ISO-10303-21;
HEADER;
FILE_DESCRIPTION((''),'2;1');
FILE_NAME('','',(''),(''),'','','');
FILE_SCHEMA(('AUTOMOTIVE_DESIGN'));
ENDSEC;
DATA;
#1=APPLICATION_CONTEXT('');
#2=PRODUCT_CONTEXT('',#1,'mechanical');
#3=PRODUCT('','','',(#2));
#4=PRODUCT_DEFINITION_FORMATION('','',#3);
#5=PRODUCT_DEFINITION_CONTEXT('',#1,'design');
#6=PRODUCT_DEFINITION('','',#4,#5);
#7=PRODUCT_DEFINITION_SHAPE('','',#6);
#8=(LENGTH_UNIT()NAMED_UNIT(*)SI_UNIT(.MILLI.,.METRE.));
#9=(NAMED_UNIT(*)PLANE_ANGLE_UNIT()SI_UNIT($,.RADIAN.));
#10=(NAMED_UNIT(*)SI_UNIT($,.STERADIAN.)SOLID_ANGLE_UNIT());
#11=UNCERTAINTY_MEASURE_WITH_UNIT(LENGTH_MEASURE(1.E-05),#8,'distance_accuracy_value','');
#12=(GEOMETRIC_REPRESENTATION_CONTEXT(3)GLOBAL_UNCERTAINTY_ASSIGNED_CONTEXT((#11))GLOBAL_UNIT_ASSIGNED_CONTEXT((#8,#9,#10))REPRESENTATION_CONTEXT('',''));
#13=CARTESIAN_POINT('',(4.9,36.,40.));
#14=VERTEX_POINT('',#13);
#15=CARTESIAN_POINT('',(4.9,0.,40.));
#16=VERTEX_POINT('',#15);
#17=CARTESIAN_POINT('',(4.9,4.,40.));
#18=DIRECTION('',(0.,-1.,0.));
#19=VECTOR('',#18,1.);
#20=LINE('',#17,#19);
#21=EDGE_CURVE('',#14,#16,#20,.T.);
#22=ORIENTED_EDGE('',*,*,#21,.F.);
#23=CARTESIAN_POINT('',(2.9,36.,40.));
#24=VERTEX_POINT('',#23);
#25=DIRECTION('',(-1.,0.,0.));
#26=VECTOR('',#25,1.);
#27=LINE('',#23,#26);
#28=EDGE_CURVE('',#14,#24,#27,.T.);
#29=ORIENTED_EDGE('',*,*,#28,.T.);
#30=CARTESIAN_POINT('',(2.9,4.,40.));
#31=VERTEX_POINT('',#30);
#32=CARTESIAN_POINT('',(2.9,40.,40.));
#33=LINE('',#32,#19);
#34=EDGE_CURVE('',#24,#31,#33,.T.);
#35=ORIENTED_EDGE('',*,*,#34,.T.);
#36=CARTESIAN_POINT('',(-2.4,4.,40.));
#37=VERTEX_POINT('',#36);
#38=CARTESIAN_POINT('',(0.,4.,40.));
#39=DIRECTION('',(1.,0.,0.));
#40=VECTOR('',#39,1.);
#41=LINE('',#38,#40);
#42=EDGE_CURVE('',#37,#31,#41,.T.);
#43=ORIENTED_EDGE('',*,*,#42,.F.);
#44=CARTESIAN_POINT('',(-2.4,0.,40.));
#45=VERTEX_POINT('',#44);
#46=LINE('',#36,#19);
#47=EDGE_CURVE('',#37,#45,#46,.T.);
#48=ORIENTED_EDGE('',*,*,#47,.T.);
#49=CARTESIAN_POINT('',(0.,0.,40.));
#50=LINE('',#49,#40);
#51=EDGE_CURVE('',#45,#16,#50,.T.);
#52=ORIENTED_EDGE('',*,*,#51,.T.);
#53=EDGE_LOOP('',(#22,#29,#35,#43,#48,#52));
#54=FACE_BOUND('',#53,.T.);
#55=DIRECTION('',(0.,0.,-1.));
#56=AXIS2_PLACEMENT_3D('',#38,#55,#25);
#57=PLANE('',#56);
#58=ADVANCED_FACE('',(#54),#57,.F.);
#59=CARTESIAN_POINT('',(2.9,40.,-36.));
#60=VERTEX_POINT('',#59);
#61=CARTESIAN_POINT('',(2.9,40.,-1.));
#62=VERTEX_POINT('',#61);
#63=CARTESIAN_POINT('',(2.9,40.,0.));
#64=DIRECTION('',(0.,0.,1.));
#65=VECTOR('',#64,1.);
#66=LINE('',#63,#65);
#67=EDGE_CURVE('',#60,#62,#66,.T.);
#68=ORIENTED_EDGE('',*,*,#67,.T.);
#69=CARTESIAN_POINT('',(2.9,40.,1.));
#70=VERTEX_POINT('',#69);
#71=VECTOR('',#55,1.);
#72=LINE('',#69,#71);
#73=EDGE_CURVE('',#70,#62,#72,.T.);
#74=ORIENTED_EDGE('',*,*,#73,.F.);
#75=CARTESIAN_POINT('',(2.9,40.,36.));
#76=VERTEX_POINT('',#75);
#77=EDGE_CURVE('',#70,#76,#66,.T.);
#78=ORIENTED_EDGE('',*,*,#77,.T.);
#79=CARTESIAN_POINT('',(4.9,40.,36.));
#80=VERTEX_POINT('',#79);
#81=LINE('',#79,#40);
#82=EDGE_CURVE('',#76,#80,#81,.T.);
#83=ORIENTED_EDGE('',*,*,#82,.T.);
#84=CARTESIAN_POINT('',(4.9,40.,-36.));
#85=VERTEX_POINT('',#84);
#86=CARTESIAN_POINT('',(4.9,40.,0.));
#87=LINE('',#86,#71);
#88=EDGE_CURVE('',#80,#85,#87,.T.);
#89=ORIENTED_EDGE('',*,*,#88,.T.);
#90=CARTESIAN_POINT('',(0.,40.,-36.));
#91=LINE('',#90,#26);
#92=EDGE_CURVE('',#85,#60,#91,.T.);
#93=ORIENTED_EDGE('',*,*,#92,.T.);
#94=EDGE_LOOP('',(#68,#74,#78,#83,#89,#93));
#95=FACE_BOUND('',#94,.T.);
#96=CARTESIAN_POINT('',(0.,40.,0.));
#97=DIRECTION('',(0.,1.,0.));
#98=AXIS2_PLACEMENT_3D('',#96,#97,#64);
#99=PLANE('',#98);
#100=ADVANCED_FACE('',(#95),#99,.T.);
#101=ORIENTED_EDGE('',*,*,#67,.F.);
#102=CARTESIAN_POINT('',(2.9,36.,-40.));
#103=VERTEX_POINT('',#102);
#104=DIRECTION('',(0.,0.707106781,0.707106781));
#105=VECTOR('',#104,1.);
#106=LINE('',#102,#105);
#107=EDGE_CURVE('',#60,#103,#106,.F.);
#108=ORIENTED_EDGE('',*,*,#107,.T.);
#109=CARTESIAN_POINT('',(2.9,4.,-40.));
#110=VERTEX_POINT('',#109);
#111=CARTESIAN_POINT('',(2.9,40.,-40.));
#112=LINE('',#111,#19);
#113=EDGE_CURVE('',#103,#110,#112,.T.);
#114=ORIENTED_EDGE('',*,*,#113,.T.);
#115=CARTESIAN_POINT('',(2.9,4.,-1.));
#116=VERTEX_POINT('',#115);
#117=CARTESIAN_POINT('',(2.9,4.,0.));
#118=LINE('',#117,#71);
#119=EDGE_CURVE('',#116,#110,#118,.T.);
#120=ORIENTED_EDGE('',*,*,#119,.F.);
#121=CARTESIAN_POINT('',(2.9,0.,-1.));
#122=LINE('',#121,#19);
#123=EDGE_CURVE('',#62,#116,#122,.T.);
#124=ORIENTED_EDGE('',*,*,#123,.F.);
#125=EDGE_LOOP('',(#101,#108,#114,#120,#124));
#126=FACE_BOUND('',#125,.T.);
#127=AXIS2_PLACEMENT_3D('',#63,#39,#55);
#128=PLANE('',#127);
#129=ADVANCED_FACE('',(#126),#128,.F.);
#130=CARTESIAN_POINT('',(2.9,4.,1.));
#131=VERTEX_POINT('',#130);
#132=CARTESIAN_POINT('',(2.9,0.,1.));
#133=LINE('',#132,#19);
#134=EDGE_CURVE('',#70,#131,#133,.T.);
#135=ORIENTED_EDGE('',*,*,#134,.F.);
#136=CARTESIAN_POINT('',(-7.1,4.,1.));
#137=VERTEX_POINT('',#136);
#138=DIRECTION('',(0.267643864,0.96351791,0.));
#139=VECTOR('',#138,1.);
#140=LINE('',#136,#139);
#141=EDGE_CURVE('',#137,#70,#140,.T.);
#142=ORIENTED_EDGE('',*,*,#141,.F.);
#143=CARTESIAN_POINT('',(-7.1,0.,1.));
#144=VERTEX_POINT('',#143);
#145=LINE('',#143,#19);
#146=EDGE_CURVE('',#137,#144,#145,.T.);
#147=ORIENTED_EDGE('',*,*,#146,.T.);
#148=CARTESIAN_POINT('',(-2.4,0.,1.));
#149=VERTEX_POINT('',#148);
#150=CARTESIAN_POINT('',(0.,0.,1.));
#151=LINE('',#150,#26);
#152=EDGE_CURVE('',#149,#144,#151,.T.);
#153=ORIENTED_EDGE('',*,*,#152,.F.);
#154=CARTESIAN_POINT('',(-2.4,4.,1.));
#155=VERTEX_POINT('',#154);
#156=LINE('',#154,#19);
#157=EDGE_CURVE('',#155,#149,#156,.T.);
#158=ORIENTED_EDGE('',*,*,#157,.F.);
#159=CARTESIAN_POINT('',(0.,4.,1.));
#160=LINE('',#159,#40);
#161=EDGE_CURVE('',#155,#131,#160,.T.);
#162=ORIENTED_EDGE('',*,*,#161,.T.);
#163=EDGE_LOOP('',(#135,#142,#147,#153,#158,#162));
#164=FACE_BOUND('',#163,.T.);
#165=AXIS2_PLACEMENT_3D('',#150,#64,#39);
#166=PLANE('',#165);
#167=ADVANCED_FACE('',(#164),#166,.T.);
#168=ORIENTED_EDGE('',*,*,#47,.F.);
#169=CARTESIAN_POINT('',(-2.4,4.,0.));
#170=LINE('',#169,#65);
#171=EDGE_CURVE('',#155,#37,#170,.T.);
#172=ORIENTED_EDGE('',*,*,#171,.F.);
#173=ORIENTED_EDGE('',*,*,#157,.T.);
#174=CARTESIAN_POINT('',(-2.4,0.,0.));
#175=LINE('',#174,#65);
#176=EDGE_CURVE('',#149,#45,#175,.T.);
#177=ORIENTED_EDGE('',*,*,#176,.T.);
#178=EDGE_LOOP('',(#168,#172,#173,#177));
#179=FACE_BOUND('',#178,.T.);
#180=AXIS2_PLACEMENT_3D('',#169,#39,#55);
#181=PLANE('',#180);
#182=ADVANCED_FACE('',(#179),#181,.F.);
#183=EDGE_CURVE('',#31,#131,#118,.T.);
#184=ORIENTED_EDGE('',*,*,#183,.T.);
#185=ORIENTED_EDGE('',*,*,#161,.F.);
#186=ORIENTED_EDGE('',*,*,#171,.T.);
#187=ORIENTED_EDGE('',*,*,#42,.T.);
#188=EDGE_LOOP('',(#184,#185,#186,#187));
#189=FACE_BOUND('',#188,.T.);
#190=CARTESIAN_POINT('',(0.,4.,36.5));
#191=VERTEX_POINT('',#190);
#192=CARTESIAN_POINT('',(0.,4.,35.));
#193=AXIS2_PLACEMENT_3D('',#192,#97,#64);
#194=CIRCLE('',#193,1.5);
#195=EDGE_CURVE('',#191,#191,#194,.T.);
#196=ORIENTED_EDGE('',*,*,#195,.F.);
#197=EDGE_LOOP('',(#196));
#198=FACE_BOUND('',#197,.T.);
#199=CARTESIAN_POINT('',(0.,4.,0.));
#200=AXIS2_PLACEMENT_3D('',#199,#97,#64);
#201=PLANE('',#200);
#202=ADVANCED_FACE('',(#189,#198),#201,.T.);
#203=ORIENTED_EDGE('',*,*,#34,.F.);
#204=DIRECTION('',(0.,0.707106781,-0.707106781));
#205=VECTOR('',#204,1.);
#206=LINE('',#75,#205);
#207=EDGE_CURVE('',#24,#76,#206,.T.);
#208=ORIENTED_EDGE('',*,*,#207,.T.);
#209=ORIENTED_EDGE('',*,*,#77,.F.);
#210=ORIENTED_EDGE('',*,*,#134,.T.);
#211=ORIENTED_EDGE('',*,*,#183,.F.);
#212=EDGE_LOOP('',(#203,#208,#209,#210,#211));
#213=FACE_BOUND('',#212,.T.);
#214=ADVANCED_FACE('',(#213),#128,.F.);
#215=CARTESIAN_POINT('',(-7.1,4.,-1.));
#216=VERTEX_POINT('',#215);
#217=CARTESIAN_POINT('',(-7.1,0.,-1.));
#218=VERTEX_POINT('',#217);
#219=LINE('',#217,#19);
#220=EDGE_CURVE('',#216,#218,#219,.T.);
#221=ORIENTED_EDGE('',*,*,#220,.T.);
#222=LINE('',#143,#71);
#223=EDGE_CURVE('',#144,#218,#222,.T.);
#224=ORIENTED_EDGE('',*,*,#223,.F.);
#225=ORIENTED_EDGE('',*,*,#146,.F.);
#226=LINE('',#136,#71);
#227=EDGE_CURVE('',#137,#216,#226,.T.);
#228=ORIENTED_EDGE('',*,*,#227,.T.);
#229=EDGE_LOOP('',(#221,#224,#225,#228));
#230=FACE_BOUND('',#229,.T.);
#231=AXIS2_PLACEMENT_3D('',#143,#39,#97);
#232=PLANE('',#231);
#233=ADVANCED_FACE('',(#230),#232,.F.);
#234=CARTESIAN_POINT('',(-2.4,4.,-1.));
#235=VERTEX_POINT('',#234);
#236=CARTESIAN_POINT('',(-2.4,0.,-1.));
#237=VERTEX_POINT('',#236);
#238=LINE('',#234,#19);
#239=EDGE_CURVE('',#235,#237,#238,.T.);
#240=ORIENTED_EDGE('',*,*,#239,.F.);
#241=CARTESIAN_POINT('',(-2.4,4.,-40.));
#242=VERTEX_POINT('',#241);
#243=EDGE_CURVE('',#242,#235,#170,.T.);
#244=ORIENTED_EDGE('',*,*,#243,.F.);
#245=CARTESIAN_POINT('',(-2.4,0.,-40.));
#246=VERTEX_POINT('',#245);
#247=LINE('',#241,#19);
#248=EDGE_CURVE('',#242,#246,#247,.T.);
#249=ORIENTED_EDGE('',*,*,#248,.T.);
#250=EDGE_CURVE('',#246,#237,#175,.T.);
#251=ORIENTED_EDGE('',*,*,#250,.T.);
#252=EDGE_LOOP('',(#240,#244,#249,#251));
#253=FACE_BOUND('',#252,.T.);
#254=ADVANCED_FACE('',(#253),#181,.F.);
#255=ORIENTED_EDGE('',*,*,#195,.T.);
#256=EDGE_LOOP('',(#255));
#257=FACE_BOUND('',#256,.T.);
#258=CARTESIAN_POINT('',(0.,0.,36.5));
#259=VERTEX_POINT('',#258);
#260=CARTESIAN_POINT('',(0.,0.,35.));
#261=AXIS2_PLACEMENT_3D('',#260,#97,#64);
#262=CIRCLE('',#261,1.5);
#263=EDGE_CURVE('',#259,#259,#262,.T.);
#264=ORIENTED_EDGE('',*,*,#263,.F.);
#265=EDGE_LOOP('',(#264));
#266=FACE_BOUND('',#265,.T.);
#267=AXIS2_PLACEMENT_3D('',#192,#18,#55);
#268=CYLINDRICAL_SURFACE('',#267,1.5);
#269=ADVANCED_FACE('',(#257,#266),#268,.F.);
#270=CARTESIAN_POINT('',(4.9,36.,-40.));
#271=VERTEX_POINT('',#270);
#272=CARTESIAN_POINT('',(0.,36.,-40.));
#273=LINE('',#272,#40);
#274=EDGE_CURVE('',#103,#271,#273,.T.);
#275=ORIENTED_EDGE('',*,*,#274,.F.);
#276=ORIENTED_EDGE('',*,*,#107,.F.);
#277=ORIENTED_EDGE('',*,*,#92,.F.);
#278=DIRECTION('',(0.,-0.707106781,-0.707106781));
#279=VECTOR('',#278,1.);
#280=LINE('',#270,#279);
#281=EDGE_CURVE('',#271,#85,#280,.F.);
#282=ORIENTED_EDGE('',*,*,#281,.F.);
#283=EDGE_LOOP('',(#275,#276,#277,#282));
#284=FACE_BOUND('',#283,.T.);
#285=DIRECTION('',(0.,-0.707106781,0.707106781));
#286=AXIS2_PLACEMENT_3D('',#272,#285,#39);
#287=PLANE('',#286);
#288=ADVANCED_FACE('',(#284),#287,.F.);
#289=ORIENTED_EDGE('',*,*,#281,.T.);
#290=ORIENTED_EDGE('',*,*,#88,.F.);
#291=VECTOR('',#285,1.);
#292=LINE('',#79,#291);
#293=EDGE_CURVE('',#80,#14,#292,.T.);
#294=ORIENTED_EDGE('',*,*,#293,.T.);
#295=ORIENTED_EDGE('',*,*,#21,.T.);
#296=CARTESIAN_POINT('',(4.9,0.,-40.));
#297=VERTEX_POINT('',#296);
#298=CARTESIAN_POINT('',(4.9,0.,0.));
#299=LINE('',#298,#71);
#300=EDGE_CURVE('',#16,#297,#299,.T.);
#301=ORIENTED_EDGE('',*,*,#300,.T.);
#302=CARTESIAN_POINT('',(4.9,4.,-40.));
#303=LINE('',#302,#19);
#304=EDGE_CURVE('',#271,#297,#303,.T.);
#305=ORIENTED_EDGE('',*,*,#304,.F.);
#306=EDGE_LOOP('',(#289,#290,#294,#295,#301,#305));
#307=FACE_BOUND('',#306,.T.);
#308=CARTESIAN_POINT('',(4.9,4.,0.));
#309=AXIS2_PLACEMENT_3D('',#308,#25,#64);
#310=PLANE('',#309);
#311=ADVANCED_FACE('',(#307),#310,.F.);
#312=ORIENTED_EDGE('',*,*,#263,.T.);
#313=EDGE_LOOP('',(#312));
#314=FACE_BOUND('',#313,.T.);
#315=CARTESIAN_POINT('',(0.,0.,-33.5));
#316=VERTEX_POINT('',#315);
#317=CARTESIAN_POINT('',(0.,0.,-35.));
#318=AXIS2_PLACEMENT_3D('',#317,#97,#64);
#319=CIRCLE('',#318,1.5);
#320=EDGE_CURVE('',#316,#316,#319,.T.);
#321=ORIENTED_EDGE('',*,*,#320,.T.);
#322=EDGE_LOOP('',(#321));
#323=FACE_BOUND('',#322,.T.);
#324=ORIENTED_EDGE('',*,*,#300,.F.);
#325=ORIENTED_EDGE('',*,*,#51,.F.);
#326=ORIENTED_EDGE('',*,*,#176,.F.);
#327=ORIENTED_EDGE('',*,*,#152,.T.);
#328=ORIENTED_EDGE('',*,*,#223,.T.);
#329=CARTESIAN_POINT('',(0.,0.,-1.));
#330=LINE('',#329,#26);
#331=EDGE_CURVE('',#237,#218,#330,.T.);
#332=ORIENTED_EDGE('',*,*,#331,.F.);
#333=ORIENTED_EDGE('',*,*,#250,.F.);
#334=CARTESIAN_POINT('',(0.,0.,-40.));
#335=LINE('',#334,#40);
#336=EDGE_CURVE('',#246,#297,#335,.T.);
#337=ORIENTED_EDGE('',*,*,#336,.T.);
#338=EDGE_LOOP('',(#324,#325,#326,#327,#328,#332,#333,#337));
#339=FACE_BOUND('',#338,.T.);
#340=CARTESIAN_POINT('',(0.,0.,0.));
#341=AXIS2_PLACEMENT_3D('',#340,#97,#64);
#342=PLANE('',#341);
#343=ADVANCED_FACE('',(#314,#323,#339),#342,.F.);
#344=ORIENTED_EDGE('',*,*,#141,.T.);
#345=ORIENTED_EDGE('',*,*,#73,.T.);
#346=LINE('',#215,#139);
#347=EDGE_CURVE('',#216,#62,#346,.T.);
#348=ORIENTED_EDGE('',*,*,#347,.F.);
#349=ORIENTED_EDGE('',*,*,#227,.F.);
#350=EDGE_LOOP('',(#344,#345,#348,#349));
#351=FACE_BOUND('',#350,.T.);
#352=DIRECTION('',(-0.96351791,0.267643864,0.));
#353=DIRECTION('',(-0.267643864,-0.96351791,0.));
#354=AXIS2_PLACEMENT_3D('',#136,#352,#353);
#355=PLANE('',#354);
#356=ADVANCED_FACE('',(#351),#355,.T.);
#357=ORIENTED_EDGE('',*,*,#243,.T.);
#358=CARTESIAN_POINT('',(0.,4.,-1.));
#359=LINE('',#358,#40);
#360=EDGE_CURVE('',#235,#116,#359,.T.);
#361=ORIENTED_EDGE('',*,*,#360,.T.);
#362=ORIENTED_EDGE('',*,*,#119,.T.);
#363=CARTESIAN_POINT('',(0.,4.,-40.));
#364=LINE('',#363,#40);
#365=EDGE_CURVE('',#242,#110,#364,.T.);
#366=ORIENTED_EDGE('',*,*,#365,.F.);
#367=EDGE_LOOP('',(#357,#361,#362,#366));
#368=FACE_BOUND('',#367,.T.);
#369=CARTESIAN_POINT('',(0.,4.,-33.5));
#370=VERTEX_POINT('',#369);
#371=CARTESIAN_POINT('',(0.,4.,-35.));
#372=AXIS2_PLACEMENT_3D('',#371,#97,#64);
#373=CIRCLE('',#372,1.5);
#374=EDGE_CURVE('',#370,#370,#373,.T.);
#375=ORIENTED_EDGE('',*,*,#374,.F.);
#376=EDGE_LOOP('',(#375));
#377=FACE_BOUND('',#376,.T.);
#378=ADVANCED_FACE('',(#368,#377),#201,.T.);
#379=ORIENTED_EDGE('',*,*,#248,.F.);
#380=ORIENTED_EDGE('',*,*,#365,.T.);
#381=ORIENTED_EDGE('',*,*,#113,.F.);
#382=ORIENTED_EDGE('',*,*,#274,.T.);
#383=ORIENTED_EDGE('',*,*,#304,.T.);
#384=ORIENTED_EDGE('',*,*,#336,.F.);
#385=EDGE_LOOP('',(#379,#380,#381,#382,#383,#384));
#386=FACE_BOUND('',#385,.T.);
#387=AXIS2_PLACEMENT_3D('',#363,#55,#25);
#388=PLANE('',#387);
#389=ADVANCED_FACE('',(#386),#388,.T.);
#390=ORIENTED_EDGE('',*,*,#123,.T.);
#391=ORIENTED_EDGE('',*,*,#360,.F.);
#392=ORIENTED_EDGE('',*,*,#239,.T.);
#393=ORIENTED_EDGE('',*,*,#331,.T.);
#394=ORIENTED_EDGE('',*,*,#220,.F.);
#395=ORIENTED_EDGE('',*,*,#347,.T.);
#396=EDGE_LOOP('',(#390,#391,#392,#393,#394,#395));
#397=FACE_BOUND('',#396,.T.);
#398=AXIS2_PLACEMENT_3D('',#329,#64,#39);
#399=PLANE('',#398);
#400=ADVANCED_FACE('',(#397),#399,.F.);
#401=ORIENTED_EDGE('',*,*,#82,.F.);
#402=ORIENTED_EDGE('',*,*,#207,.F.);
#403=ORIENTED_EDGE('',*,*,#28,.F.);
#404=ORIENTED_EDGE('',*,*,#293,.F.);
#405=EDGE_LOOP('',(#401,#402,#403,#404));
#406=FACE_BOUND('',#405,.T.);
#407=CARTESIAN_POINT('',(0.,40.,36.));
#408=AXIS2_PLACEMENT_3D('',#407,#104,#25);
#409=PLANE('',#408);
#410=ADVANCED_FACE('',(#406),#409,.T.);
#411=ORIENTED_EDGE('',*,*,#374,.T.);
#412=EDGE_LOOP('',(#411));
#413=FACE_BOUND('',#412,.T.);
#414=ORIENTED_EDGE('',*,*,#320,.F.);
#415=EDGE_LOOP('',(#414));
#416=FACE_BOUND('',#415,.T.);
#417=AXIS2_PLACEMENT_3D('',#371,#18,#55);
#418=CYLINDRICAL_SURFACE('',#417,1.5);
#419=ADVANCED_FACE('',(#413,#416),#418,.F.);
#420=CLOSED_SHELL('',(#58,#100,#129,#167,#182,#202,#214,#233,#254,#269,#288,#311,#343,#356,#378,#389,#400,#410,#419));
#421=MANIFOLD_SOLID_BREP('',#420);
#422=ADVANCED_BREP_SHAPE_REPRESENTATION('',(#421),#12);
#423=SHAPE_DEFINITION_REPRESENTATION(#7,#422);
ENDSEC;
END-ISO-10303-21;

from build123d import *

# Parameters (mm, degrees)
SKETCH_1_W      = 7.3
SKETCH_1_H      = 80
SKETCH_1_R      = 1.5
EXTRUDE_1_DEPTH = 4
SKETCH_1_4_W    = 2
SKETCH_1_4_H    = 80
EXTRUDE_3_DEPTH = 40
EXTRUDE_4_DEPTH = 1
CHAMFER_1_SIZE  = 4


with BuildPart() as part:
    # 草图1 → 凸台-拉伸1 (new body)
    with BuildSketch(Plane(origin=(0, 0, 0), x_dir=(1, 0, 0), z_dir=(0, 1, 0))):
        with Locations((1.25, 0)):
            Rectangle(SKETCH_1_W, SKETCH_1_H)
        with Locations((0, 35)):
            Circle(SKETCH_1_R, mode=Mode.SUBTRACT)
        with Locations((0, -35)):
            Circle(SKETCH_1_R, mode=Mode.SUBTRACT)
    extrude(amount=EXTRUDE_1_DEPTH)

    # 草图1<4> → 凸台-拉伸3 (add)
    with BuildSketch(Plane(origin=(0, 0, 0), x_dir=(1, 0, 0), z_dir=(0, 1, 0))):
        with Locations((3.9, 0)):
            Rectangle(SKETCH_1_4_W, SKETCH_1_4_H)
    extrude(amount=EXTRUDE_3_DEPTH)

    # 草图2 → 凸台-拉伸4 (add, symmetric)
    with BuildSketch(Plane.XY):
        Polygon((2.9, 0), (2.9, 40), (-7.1, 4), (-7.1, 0), align=None)
    extrude(amount=EXTRUDE_4_DEPTH, both=True)

    # 倒角1
    chamfer_1_edges = [part.edges().sort_by_distance(p)[0] for p in [
        (3.9, 40, 40),
        (3.9, 40, -40),
    ]]
    chamfer(chamfer_1_edges, length=CHAMFER_1_SIZE)


solid = part.part
